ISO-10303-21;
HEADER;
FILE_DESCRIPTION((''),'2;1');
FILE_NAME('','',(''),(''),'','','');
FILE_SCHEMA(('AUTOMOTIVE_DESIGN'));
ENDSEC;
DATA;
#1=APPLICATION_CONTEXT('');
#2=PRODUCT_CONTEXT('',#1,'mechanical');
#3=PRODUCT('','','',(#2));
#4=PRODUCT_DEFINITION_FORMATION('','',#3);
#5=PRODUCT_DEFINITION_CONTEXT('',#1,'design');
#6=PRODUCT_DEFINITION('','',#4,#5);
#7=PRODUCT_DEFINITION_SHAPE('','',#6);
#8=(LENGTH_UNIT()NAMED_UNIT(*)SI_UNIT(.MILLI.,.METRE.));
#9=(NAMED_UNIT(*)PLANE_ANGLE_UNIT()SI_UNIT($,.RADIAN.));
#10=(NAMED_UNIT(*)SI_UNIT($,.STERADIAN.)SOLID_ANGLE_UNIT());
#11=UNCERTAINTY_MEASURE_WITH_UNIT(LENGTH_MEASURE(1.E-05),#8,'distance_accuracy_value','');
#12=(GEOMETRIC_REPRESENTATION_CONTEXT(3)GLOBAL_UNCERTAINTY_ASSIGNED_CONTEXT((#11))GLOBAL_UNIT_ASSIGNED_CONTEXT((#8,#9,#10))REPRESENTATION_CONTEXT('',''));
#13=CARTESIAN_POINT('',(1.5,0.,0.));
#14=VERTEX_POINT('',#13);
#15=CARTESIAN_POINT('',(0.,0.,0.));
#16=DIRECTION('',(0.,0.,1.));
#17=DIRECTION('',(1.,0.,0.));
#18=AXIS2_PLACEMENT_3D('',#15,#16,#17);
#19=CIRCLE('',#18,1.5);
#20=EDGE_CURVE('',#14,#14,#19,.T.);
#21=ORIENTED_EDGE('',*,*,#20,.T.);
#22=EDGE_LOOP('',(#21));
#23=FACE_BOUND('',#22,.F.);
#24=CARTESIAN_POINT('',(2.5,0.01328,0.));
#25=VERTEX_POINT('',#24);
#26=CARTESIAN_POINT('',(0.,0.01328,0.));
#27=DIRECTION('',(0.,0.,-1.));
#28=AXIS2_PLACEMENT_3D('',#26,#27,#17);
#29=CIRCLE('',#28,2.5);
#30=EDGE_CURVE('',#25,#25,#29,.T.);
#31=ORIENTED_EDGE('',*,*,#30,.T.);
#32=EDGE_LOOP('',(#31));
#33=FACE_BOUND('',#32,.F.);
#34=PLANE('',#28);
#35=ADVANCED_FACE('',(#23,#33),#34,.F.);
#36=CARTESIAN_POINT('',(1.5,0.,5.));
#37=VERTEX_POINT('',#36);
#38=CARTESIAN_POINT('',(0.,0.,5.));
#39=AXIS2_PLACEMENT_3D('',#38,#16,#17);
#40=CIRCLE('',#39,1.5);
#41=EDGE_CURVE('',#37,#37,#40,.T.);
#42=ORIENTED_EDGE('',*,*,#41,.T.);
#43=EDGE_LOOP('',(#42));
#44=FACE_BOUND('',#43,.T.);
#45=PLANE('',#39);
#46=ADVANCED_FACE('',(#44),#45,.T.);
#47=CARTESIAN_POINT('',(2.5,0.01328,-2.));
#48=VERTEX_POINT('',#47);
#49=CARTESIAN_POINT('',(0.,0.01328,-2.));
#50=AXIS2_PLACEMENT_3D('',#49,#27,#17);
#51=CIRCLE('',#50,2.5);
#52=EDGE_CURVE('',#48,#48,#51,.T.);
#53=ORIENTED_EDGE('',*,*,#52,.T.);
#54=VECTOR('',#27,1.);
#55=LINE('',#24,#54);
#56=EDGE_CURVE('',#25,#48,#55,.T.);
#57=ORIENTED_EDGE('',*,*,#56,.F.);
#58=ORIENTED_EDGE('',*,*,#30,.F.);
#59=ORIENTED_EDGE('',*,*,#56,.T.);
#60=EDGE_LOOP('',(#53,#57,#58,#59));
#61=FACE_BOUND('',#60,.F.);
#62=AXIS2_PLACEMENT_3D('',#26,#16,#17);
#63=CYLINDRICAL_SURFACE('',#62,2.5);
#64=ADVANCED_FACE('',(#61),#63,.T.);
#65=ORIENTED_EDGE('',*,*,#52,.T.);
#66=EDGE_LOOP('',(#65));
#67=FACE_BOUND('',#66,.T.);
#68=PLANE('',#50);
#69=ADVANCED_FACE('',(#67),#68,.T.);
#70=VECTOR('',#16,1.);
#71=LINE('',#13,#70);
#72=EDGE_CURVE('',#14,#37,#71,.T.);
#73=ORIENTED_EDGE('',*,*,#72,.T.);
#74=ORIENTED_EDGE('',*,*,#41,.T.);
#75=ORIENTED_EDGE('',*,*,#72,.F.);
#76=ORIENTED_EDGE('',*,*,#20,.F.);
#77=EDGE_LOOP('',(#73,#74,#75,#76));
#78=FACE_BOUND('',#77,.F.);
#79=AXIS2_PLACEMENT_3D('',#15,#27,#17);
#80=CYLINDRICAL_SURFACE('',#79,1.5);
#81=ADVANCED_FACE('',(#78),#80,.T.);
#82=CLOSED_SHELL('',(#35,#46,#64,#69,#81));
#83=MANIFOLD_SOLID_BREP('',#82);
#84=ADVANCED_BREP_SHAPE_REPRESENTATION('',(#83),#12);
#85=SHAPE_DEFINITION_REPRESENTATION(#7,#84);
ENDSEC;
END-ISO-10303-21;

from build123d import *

# Parameters (mm, degrees)
F0_R     = 1.5
F1_DEPTH = 5
F2_R     = 2.5
F2_R_2   = 1.5
F3_DEPTH = 2


with BuildPart() as f1:
    # F0 (on Top) → F1 (new body)
    with BuildSketch(Plane.XY):
        Circle(F0_R)
    extrude(amount=F1_DEPTH)

    # F2 (on face) → F3 (join)
    with BuildSketch(Plane(origin=(0, 0, 0), x_dir=(1, 0, 0), z_dir=(0, 0, -1))):
        with Locations((0, -0.0132801069)):
            Circle(F2_R)
        Circle(F2_R_2, mode=Mode.SUBTRACT)
        Circle(F2_R_2)
    extrude(amount=F3_DEPTH)


solid = f1.part
